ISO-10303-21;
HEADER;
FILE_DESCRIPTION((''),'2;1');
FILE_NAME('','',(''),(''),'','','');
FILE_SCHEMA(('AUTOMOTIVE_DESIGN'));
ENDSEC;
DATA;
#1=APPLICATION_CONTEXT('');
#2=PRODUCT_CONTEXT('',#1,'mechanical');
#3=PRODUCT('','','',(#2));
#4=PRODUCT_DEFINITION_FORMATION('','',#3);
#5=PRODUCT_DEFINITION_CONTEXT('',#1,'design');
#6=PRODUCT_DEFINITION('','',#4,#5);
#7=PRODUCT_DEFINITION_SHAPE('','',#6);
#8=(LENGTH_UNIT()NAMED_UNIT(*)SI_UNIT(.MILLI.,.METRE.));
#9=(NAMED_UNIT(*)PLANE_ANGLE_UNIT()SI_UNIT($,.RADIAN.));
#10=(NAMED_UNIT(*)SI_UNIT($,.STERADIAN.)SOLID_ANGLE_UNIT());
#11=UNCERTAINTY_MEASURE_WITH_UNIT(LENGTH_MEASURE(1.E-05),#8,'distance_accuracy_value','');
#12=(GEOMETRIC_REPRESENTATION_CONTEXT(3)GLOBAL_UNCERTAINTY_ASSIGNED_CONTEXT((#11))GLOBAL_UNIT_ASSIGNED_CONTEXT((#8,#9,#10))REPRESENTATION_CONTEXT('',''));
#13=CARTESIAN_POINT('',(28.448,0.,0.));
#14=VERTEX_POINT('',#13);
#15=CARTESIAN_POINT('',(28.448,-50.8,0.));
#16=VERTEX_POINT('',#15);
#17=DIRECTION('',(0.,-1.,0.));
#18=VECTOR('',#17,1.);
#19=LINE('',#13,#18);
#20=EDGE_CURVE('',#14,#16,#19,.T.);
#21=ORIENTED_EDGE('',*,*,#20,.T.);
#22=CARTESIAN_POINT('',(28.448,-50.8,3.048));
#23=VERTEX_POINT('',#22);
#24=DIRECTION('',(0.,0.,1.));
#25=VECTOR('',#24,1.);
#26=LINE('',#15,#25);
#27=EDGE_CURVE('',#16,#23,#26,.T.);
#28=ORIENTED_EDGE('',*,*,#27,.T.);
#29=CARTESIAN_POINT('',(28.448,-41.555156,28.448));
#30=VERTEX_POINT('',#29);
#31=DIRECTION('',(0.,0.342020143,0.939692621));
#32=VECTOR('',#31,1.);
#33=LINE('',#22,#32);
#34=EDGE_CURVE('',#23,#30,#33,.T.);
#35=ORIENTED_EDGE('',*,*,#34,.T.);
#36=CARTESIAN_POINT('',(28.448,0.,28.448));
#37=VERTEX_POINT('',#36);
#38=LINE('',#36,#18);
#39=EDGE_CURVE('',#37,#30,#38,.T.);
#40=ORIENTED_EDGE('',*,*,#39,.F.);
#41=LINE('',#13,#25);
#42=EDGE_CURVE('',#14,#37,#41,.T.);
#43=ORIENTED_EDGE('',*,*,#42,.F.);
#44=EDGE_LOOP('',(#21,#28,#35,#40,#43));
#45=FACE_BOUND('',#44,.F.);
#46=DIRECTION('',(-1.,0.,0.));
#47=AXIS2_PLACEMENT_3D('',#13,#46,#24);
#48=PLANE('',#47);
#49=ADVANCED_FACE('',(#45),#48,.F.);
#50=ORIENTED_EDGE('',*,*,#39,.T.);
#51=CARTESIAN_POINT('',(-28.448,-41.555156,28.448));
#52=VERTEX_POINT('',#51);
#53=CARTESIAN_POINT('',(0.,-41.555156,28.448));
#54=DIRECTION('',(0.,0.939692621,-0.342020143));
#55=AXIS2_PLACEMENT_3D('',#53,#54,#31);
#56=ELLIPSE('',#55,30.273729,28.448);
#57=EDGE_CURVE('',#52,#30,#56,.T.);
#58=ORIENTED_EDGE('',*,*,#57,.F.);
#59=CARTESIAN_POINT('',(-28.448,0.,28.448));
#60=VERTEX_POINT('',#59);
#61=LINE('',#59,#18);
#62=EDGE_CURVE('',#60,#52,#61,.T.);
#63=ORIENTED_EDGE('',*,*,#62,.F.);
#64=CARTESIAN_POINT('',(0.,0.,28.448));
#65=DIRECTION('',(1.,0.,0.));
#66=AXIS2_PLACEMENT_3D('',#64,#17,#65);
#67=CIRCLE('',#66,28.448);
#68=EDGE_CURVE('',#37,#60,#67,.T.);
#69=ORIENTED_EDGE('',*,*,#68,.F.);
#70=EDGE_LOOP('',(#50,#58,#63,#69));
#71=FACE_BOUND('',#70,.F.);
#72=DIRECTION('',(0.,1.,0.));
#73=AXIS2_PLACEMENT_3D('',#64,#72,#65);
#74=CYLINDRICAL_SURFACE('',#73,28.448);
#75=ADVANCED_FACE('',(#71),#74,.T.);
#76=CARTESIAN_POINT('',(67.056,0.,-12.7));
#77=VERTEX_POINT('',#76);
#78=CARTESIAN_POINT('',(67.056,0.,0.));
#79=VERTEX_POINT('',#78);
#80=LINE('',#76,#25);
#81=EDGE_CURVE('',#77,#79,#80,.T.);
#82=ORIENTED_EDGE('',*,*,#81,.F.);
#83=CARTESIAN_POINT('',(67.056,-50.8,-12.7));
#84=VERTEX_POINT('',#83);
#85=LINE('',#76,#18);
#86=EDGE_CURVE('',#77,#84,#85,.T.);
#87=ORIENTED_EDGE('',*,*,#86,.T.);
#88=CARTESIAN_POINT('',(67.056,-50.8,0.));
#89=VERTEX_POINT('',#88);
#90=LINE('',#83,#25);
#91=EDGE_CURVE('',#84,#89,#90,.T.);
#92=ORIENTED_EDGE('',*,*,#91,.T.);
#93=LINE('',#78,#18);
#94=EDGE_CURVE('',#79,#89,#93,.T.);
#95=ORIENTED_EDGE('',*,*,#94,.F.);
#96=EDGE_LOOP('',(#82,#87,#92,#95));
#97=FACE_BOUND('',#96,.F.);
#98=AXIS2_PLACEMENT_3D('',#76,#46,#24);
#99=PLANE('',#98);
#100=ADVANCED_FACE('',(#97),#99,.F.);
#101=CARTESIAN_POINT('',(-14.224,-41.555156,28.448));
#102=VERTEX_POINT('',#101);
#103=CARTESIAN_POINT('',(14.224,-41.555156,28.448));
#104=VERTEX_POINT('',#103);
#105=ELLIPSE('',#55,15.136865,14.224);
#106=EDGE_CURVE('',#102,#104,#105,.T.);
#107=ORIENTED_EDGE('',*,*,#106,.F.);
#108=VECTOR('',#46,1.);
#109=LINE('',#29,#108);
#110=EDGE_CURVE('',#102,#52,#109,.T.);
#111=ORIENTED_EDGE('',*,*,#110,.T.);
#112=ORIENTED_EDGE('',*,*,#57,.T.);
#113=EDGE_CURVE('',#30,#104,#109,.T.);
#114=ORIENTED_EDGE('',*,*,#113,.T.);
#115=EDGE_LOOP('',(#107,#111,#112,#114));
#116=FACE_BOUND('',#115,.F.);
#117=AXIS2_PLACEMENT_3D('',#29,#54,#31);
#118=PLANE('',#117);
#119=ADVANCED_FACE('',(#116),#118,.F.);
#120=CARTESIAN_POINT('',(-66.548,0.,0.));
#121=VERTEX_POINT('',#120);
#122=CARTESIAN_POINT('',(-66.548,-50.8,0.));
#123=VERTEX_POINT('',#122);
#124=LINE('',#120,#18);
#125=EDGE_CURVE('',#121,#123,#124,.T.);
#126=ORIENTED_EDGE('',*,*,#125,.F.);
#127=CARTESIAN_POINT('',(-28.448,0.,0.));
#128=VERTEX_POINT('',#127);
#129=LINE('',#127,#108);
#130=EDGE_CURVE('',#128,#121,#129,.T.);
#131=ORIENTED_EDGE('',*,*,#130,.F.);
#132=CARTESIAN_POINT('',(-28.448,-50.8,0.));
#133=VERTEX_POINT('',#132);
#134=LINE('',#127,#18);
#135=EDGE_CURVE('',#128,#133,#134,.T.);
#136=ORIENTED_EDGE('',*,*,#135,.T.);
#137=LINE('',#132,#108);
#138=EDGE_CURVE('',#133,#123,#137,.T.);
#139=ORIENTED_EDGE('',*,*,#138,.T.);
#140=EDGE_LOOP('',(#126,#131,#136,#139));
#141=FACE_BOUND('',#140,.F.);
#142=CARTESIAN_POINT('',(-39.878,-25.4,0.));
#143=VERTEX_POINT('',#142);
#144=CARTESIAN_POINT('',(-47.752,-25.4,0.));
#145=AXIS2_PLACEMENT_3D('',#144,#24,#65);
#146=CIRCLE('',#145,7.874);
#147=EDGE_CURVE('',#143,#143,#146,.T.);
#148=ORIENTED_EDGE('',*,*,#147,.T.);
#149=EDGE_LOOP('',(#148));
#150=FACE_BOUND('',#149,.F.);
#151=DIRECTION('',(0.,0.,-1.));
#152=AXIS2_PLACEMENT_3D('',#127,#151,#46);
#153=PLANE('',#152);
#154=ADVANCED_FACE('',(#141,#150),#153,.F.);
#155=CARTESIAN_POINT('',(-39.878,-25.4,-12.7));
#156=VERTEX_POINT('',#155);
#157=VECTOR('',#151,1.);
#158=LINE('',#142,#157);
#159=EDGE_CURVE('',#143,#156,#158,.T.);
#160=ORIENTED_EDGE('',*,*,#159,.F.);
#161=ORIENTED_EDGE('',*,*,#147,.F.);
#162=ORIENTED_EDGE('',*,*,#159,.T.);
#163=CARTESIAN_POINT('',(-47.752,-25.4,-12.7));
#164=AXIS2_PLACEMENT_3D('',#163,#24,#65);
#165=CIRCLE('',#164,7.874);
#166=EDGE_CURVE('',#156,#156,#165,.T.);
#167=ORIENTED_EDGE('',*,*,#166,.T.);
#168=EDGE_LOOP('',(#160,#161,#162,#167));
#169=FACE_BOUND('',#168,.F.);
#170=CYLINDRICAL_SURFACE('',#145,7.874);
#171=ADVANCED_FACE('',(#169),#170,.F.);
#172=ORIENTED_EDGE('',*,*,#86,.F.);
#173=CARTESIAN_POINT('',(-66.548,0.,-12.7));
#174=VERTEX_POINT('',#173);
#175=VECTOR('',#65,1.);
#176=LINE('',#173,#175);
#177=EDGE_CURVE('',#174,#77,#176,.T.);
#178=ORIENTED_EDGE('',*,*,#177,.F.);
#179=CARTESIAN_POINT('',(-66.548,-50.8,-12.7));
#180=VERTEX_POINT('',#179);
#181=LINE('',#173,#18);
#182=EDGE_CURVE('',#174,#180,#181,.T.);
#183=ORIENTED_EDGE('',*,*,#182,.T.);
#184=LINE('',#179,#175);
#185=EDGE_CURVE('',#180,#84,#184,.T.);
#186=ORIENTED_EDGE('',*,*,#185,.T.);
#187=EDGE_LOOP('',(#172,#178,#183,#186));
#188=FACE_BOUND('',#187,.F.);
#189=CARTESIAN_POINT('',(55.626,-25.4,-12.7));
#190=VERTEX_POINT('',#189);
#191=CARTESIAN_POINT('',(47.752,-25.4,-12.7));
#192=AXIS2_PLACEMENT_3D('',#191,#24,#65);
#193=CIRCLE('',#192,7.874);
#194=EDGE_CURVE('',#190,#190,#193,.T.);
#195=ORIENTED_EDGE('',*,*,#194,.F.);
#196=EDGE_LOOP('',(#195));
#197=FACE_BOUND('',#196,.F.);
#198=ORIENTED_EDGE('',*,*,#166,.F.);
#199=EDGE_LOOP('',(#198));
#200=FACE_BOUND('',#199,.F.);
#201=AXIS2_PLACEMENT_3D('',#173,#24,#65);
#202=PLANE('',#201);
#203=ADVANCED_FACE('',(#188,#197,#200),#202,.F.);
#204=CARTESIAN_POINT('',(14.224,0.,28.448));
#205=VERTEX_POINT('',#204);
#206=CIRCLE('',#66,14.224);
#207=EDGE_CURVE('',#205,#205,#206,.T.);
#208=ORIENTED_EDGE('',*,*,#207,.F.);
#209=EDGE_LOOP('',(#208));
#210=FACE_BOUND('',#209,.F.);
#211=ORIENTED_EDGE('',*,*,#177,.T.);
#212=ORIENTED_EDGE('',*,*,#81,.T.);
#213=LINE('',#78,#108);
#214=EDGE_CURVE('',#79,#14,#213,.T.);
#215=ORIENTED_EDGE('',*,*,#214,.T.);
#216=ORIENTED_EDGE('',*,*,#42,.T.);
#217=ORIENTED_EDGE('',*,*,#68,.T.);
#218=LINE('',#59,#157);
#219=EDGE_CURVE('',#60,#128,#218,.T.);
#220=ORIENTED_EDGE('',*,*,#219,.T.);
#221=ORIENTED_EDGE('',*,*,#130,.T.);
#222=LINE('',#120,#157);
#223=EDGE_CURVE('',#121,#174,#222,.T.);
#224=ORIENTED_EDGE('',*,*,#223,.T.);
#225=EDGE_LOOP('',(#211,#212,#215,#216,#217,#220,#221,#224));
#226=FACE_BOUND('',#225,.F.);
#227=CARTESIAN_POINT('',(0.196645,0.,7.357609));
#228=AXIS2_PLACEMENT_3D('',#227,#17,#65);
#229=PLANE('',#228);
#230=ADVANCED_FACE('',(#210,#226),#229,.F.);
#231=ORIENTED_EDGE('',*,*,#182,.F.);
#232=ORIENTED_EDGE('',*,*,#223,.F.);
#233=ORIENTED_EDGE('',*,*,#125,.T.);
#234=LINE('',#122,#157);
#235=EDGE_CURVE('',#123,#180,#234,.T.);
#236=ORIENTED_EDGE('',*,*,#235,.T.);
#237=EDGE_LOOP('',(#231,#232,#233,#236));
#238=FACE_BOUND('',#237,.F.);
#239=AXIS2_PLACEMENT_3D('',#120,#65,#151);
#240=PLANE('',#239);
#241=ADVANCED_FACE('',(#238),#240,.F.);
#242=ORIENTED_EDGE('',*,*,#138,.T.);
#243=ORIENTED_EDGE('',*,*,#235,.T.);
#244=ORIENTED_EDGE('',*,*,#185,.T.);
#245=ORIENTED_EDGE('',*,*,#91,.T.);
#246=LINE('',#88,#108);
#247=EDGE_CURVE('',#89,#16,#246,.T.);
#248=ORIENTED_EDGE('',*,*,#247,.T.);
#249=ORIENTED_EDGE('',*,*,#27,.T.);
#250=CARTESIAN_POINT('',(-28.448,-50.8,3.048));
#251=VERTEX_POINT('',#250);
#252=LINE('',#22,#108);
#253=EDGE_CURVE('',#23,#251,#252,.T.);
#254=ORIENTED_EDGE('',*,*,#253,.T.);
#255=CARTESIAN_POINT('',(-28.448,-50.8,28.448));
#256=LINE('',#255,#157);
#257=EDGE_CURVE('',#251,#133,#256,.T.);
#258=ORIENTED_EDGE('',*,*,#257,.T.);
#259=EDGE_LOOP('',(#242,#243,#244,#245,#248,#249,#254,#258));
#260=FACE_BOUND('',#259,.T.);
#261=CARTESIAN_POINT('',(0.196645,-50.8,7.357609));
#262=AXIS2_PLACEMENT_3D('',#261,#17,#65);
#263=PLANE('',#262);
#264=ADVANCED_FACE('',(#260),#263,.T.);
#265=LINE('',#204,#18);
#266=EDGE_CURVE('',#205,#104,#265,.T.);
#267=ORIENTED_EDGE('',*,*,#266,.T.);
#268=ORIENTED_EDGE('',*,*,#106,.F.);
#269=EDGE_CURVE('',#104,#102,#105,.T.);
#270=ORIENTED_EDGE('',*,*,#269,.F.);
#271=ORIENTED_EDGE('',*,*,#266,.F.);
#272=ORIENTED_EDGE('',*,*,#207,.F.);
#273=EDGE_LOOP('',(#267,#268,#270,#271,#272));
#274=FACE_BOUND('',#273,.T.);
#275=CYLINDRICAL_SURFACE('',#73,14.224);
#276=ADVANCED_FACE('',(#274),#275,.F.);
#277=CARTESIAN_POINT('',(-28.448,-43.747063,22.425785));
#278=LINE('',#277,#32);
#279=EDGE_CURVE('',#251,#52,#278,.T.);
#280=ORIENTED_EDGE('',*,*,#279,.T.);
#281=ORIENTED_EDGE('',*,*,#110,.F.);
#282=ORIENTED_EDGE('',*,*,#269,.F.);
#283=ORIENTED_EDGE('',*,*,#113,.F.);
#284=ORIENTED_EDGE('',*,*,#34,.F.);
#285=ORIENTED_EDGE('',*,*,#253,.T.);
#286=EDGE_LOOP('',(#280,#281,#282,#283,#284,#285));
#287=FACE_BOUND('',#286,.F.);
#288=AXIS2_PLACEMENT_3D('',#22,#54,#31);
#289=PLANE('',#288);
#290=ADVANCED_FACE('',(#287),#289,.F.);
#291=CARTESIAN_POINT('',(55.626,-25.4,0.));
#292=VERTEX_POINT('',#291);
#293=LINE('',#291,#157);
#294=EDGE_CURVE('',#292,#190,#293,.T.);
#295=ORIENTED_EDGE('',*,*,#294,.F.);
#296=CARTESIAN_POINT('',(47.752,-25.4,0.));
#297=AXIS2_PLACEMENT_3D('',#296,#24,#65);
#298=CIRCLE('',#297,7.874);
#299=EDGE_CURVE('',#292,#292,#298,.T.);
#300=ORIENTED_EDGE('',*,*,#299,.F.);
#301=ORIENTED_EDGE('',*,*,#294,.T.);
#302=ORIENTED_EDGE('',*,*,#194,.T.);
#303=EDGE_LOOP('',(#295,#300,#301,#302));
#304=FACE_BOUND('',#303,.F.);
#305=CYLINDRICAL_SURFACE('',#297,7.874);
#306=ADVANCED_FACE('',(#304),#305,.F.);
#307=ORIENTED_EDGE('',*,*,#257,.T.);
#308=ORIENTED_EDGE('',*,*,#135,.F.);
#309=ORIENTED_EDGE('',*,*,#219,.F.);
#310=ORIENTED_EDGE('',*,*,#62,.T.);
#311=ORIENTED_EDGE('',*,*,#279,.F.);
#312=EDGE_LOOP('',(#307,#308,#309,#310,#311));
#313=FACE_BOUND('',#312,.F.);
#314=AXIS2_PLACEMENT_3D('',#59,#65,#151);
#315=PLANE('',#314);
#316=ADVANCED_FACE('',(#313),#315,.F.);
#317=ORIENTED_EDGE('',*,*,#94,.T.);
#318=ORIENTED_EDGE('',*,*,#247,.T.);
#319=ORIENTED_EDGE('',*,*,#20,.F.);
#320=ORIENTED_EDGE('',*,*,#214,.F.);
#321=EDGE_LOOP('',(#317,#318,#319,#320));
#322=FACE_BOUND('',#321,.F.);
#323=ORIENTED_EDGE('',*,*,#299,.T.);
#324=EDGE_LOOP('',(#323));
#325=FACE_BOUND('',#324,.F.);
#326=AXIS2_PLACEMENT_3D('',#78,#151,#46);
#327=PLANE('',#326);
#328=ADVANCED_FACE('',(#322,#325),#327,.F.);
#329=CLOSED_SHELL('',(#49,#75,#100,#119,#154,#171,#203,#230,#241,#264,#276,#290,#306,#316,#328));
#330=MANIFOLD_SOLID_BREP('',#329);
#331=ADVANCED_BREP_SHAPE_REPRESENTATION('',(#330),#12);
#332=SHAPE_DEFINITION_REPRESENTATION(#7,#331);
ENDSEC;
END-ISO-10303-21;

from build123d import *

# Parameters (mm, degrees)
F0_R     = 14.224
F1_DEPTH = 50.8
F2_R     = 7.874
F3_DEPTH = 25.4
F5_DEPTH = 76.2


# Not quite as in the source:
# - a feature names something its author has since deleted; it is built from what else it names


with BuildPart() as f1:
    # F0 (on Front) → F1 (new body)
    with BuildSketch(Plane.XZ):
        with BuildLine():
            Line((28.448, 0), (28.448, 28.448))
            ThreePointArc((28.448, 28.448), (0, 56.896), (-28.448, 28.448))
            Line((-28.448, 28.448), (-28.448, 0))
            Line((-28.448, 0), (-66.548, 0))
            Line((-66.548, 0), (-66.548, -12.7))
            Line((-66.548, -12.7), (67.056, -12.7))
            Line((67.056, -12.7), (67.056, 0))
            Line((67.056, 0), (28.448, 0))
        make_face()
        with Locations((0, 28.448)):
            Circle(F0_R, mode=Mode.SUBTRACT)
    extrude(amount=F1_DEPTH)

    # F2 (on face) → F3 (cut)
    with BuildSketch(Plane.XY):
        with Locations((-47.752, -25.4)):
            Circle(F2_R)
        with Locations((47.752, -25.4)):
            Circle(F2_R)
    extrude(amount=-F3_DEPTH, mode=Mode.SUBTRACT)

    # F4 (on face) → F5 (cut)
    with BuildSketch(Plane.YZ.offset(28.448)):
        Polygon((-50.8, 28.448), (-50.8, 3.048), (-41.5551560496, 28.448), align=None)
        Polygon((-50.8, 28.448), (-41.5551560496, 28.448), (-26.8481459022, 68.8551782879), (-50.8, 64.0367791057), align=None)
    extrude(amount=-F5_DEPTH, mode=Mode.SUBTRACT)


solid = f1.part
